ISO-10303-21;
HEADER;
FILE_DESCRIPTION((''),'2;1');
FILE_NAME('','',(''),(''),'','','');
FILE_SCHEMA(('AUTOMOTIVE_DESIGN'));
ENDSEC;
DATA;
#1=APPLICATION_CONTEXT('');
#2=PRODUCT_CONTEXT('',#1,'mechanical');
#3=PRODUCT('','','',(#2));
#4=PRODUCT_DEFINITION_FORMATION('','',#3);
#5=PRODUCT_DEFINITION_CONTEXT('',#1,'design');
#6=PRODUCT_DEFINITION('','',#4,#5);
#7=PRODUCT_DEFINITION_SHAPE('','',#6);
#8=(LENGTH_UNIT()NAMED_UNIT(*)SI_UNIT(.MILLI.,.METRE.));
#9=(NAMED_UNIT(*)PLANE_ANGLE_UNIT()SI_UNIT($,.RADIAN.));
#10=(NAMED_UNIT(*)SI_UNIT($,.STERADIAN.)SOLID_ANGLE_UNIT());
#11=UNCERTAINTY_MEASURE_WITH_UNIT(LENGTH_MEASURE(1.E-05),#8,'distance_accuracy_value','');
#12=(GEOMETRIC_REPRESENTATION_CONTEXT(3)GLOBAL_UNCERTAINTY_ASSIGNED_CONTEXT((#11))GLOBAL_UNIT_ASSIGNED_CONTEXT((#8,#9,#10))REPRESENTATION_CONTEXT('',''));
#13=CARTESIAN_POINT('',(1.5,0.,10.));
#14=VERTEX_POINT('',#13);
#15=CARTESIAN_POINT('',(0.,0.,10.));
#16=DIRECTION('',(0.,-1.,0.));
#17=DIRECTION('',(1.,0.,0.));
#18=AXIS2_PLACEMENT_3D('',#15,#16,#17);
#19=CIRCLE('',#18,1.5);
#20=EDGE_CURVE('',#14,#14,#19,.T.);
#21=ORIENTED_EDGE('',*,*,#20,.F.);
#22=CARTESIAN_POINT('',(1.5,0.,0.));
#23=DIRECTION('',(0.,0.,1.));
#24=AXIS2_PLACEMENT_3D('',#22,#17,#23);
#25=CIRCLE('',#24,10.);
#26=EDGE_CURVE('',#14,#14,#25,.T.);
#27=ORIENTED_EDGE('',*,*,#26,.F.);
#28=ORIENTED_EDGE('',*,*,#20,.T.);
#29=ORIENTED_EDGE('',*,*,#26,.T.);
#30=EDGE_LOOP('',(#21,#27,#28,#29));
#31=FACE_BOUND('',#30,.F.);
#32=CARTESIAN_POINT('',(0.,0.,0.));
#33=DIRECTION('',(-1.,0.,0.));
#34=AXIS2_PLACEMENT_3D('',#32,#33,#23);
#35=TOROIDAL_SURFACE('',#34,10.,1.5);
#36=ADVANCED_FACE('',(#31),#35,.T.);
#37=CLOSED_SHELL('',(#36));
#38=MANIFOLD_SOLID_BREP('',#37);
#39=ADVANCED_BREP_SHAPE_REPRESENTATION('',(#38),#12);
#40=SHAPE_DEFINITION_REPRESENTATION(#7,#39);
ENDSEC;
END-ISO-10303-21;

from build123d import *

# Parameters (mm, degrees)
F0_R = 1.5


# Not quite as in the source:
# - the program builds the solid bodies; features that only make, move or delete a surface that nothing else refers to are left out


with BuildPart() as f1:
    # F0 (on Front) → F1 (revolve)
    with BuildSketch(Plane.XZ):
        with Locations((0, 10)):
            Circle(F0_R)
    revolve(axis=Axis((5, 0, 0), (1, 0, 0)))


solid = f1.part
